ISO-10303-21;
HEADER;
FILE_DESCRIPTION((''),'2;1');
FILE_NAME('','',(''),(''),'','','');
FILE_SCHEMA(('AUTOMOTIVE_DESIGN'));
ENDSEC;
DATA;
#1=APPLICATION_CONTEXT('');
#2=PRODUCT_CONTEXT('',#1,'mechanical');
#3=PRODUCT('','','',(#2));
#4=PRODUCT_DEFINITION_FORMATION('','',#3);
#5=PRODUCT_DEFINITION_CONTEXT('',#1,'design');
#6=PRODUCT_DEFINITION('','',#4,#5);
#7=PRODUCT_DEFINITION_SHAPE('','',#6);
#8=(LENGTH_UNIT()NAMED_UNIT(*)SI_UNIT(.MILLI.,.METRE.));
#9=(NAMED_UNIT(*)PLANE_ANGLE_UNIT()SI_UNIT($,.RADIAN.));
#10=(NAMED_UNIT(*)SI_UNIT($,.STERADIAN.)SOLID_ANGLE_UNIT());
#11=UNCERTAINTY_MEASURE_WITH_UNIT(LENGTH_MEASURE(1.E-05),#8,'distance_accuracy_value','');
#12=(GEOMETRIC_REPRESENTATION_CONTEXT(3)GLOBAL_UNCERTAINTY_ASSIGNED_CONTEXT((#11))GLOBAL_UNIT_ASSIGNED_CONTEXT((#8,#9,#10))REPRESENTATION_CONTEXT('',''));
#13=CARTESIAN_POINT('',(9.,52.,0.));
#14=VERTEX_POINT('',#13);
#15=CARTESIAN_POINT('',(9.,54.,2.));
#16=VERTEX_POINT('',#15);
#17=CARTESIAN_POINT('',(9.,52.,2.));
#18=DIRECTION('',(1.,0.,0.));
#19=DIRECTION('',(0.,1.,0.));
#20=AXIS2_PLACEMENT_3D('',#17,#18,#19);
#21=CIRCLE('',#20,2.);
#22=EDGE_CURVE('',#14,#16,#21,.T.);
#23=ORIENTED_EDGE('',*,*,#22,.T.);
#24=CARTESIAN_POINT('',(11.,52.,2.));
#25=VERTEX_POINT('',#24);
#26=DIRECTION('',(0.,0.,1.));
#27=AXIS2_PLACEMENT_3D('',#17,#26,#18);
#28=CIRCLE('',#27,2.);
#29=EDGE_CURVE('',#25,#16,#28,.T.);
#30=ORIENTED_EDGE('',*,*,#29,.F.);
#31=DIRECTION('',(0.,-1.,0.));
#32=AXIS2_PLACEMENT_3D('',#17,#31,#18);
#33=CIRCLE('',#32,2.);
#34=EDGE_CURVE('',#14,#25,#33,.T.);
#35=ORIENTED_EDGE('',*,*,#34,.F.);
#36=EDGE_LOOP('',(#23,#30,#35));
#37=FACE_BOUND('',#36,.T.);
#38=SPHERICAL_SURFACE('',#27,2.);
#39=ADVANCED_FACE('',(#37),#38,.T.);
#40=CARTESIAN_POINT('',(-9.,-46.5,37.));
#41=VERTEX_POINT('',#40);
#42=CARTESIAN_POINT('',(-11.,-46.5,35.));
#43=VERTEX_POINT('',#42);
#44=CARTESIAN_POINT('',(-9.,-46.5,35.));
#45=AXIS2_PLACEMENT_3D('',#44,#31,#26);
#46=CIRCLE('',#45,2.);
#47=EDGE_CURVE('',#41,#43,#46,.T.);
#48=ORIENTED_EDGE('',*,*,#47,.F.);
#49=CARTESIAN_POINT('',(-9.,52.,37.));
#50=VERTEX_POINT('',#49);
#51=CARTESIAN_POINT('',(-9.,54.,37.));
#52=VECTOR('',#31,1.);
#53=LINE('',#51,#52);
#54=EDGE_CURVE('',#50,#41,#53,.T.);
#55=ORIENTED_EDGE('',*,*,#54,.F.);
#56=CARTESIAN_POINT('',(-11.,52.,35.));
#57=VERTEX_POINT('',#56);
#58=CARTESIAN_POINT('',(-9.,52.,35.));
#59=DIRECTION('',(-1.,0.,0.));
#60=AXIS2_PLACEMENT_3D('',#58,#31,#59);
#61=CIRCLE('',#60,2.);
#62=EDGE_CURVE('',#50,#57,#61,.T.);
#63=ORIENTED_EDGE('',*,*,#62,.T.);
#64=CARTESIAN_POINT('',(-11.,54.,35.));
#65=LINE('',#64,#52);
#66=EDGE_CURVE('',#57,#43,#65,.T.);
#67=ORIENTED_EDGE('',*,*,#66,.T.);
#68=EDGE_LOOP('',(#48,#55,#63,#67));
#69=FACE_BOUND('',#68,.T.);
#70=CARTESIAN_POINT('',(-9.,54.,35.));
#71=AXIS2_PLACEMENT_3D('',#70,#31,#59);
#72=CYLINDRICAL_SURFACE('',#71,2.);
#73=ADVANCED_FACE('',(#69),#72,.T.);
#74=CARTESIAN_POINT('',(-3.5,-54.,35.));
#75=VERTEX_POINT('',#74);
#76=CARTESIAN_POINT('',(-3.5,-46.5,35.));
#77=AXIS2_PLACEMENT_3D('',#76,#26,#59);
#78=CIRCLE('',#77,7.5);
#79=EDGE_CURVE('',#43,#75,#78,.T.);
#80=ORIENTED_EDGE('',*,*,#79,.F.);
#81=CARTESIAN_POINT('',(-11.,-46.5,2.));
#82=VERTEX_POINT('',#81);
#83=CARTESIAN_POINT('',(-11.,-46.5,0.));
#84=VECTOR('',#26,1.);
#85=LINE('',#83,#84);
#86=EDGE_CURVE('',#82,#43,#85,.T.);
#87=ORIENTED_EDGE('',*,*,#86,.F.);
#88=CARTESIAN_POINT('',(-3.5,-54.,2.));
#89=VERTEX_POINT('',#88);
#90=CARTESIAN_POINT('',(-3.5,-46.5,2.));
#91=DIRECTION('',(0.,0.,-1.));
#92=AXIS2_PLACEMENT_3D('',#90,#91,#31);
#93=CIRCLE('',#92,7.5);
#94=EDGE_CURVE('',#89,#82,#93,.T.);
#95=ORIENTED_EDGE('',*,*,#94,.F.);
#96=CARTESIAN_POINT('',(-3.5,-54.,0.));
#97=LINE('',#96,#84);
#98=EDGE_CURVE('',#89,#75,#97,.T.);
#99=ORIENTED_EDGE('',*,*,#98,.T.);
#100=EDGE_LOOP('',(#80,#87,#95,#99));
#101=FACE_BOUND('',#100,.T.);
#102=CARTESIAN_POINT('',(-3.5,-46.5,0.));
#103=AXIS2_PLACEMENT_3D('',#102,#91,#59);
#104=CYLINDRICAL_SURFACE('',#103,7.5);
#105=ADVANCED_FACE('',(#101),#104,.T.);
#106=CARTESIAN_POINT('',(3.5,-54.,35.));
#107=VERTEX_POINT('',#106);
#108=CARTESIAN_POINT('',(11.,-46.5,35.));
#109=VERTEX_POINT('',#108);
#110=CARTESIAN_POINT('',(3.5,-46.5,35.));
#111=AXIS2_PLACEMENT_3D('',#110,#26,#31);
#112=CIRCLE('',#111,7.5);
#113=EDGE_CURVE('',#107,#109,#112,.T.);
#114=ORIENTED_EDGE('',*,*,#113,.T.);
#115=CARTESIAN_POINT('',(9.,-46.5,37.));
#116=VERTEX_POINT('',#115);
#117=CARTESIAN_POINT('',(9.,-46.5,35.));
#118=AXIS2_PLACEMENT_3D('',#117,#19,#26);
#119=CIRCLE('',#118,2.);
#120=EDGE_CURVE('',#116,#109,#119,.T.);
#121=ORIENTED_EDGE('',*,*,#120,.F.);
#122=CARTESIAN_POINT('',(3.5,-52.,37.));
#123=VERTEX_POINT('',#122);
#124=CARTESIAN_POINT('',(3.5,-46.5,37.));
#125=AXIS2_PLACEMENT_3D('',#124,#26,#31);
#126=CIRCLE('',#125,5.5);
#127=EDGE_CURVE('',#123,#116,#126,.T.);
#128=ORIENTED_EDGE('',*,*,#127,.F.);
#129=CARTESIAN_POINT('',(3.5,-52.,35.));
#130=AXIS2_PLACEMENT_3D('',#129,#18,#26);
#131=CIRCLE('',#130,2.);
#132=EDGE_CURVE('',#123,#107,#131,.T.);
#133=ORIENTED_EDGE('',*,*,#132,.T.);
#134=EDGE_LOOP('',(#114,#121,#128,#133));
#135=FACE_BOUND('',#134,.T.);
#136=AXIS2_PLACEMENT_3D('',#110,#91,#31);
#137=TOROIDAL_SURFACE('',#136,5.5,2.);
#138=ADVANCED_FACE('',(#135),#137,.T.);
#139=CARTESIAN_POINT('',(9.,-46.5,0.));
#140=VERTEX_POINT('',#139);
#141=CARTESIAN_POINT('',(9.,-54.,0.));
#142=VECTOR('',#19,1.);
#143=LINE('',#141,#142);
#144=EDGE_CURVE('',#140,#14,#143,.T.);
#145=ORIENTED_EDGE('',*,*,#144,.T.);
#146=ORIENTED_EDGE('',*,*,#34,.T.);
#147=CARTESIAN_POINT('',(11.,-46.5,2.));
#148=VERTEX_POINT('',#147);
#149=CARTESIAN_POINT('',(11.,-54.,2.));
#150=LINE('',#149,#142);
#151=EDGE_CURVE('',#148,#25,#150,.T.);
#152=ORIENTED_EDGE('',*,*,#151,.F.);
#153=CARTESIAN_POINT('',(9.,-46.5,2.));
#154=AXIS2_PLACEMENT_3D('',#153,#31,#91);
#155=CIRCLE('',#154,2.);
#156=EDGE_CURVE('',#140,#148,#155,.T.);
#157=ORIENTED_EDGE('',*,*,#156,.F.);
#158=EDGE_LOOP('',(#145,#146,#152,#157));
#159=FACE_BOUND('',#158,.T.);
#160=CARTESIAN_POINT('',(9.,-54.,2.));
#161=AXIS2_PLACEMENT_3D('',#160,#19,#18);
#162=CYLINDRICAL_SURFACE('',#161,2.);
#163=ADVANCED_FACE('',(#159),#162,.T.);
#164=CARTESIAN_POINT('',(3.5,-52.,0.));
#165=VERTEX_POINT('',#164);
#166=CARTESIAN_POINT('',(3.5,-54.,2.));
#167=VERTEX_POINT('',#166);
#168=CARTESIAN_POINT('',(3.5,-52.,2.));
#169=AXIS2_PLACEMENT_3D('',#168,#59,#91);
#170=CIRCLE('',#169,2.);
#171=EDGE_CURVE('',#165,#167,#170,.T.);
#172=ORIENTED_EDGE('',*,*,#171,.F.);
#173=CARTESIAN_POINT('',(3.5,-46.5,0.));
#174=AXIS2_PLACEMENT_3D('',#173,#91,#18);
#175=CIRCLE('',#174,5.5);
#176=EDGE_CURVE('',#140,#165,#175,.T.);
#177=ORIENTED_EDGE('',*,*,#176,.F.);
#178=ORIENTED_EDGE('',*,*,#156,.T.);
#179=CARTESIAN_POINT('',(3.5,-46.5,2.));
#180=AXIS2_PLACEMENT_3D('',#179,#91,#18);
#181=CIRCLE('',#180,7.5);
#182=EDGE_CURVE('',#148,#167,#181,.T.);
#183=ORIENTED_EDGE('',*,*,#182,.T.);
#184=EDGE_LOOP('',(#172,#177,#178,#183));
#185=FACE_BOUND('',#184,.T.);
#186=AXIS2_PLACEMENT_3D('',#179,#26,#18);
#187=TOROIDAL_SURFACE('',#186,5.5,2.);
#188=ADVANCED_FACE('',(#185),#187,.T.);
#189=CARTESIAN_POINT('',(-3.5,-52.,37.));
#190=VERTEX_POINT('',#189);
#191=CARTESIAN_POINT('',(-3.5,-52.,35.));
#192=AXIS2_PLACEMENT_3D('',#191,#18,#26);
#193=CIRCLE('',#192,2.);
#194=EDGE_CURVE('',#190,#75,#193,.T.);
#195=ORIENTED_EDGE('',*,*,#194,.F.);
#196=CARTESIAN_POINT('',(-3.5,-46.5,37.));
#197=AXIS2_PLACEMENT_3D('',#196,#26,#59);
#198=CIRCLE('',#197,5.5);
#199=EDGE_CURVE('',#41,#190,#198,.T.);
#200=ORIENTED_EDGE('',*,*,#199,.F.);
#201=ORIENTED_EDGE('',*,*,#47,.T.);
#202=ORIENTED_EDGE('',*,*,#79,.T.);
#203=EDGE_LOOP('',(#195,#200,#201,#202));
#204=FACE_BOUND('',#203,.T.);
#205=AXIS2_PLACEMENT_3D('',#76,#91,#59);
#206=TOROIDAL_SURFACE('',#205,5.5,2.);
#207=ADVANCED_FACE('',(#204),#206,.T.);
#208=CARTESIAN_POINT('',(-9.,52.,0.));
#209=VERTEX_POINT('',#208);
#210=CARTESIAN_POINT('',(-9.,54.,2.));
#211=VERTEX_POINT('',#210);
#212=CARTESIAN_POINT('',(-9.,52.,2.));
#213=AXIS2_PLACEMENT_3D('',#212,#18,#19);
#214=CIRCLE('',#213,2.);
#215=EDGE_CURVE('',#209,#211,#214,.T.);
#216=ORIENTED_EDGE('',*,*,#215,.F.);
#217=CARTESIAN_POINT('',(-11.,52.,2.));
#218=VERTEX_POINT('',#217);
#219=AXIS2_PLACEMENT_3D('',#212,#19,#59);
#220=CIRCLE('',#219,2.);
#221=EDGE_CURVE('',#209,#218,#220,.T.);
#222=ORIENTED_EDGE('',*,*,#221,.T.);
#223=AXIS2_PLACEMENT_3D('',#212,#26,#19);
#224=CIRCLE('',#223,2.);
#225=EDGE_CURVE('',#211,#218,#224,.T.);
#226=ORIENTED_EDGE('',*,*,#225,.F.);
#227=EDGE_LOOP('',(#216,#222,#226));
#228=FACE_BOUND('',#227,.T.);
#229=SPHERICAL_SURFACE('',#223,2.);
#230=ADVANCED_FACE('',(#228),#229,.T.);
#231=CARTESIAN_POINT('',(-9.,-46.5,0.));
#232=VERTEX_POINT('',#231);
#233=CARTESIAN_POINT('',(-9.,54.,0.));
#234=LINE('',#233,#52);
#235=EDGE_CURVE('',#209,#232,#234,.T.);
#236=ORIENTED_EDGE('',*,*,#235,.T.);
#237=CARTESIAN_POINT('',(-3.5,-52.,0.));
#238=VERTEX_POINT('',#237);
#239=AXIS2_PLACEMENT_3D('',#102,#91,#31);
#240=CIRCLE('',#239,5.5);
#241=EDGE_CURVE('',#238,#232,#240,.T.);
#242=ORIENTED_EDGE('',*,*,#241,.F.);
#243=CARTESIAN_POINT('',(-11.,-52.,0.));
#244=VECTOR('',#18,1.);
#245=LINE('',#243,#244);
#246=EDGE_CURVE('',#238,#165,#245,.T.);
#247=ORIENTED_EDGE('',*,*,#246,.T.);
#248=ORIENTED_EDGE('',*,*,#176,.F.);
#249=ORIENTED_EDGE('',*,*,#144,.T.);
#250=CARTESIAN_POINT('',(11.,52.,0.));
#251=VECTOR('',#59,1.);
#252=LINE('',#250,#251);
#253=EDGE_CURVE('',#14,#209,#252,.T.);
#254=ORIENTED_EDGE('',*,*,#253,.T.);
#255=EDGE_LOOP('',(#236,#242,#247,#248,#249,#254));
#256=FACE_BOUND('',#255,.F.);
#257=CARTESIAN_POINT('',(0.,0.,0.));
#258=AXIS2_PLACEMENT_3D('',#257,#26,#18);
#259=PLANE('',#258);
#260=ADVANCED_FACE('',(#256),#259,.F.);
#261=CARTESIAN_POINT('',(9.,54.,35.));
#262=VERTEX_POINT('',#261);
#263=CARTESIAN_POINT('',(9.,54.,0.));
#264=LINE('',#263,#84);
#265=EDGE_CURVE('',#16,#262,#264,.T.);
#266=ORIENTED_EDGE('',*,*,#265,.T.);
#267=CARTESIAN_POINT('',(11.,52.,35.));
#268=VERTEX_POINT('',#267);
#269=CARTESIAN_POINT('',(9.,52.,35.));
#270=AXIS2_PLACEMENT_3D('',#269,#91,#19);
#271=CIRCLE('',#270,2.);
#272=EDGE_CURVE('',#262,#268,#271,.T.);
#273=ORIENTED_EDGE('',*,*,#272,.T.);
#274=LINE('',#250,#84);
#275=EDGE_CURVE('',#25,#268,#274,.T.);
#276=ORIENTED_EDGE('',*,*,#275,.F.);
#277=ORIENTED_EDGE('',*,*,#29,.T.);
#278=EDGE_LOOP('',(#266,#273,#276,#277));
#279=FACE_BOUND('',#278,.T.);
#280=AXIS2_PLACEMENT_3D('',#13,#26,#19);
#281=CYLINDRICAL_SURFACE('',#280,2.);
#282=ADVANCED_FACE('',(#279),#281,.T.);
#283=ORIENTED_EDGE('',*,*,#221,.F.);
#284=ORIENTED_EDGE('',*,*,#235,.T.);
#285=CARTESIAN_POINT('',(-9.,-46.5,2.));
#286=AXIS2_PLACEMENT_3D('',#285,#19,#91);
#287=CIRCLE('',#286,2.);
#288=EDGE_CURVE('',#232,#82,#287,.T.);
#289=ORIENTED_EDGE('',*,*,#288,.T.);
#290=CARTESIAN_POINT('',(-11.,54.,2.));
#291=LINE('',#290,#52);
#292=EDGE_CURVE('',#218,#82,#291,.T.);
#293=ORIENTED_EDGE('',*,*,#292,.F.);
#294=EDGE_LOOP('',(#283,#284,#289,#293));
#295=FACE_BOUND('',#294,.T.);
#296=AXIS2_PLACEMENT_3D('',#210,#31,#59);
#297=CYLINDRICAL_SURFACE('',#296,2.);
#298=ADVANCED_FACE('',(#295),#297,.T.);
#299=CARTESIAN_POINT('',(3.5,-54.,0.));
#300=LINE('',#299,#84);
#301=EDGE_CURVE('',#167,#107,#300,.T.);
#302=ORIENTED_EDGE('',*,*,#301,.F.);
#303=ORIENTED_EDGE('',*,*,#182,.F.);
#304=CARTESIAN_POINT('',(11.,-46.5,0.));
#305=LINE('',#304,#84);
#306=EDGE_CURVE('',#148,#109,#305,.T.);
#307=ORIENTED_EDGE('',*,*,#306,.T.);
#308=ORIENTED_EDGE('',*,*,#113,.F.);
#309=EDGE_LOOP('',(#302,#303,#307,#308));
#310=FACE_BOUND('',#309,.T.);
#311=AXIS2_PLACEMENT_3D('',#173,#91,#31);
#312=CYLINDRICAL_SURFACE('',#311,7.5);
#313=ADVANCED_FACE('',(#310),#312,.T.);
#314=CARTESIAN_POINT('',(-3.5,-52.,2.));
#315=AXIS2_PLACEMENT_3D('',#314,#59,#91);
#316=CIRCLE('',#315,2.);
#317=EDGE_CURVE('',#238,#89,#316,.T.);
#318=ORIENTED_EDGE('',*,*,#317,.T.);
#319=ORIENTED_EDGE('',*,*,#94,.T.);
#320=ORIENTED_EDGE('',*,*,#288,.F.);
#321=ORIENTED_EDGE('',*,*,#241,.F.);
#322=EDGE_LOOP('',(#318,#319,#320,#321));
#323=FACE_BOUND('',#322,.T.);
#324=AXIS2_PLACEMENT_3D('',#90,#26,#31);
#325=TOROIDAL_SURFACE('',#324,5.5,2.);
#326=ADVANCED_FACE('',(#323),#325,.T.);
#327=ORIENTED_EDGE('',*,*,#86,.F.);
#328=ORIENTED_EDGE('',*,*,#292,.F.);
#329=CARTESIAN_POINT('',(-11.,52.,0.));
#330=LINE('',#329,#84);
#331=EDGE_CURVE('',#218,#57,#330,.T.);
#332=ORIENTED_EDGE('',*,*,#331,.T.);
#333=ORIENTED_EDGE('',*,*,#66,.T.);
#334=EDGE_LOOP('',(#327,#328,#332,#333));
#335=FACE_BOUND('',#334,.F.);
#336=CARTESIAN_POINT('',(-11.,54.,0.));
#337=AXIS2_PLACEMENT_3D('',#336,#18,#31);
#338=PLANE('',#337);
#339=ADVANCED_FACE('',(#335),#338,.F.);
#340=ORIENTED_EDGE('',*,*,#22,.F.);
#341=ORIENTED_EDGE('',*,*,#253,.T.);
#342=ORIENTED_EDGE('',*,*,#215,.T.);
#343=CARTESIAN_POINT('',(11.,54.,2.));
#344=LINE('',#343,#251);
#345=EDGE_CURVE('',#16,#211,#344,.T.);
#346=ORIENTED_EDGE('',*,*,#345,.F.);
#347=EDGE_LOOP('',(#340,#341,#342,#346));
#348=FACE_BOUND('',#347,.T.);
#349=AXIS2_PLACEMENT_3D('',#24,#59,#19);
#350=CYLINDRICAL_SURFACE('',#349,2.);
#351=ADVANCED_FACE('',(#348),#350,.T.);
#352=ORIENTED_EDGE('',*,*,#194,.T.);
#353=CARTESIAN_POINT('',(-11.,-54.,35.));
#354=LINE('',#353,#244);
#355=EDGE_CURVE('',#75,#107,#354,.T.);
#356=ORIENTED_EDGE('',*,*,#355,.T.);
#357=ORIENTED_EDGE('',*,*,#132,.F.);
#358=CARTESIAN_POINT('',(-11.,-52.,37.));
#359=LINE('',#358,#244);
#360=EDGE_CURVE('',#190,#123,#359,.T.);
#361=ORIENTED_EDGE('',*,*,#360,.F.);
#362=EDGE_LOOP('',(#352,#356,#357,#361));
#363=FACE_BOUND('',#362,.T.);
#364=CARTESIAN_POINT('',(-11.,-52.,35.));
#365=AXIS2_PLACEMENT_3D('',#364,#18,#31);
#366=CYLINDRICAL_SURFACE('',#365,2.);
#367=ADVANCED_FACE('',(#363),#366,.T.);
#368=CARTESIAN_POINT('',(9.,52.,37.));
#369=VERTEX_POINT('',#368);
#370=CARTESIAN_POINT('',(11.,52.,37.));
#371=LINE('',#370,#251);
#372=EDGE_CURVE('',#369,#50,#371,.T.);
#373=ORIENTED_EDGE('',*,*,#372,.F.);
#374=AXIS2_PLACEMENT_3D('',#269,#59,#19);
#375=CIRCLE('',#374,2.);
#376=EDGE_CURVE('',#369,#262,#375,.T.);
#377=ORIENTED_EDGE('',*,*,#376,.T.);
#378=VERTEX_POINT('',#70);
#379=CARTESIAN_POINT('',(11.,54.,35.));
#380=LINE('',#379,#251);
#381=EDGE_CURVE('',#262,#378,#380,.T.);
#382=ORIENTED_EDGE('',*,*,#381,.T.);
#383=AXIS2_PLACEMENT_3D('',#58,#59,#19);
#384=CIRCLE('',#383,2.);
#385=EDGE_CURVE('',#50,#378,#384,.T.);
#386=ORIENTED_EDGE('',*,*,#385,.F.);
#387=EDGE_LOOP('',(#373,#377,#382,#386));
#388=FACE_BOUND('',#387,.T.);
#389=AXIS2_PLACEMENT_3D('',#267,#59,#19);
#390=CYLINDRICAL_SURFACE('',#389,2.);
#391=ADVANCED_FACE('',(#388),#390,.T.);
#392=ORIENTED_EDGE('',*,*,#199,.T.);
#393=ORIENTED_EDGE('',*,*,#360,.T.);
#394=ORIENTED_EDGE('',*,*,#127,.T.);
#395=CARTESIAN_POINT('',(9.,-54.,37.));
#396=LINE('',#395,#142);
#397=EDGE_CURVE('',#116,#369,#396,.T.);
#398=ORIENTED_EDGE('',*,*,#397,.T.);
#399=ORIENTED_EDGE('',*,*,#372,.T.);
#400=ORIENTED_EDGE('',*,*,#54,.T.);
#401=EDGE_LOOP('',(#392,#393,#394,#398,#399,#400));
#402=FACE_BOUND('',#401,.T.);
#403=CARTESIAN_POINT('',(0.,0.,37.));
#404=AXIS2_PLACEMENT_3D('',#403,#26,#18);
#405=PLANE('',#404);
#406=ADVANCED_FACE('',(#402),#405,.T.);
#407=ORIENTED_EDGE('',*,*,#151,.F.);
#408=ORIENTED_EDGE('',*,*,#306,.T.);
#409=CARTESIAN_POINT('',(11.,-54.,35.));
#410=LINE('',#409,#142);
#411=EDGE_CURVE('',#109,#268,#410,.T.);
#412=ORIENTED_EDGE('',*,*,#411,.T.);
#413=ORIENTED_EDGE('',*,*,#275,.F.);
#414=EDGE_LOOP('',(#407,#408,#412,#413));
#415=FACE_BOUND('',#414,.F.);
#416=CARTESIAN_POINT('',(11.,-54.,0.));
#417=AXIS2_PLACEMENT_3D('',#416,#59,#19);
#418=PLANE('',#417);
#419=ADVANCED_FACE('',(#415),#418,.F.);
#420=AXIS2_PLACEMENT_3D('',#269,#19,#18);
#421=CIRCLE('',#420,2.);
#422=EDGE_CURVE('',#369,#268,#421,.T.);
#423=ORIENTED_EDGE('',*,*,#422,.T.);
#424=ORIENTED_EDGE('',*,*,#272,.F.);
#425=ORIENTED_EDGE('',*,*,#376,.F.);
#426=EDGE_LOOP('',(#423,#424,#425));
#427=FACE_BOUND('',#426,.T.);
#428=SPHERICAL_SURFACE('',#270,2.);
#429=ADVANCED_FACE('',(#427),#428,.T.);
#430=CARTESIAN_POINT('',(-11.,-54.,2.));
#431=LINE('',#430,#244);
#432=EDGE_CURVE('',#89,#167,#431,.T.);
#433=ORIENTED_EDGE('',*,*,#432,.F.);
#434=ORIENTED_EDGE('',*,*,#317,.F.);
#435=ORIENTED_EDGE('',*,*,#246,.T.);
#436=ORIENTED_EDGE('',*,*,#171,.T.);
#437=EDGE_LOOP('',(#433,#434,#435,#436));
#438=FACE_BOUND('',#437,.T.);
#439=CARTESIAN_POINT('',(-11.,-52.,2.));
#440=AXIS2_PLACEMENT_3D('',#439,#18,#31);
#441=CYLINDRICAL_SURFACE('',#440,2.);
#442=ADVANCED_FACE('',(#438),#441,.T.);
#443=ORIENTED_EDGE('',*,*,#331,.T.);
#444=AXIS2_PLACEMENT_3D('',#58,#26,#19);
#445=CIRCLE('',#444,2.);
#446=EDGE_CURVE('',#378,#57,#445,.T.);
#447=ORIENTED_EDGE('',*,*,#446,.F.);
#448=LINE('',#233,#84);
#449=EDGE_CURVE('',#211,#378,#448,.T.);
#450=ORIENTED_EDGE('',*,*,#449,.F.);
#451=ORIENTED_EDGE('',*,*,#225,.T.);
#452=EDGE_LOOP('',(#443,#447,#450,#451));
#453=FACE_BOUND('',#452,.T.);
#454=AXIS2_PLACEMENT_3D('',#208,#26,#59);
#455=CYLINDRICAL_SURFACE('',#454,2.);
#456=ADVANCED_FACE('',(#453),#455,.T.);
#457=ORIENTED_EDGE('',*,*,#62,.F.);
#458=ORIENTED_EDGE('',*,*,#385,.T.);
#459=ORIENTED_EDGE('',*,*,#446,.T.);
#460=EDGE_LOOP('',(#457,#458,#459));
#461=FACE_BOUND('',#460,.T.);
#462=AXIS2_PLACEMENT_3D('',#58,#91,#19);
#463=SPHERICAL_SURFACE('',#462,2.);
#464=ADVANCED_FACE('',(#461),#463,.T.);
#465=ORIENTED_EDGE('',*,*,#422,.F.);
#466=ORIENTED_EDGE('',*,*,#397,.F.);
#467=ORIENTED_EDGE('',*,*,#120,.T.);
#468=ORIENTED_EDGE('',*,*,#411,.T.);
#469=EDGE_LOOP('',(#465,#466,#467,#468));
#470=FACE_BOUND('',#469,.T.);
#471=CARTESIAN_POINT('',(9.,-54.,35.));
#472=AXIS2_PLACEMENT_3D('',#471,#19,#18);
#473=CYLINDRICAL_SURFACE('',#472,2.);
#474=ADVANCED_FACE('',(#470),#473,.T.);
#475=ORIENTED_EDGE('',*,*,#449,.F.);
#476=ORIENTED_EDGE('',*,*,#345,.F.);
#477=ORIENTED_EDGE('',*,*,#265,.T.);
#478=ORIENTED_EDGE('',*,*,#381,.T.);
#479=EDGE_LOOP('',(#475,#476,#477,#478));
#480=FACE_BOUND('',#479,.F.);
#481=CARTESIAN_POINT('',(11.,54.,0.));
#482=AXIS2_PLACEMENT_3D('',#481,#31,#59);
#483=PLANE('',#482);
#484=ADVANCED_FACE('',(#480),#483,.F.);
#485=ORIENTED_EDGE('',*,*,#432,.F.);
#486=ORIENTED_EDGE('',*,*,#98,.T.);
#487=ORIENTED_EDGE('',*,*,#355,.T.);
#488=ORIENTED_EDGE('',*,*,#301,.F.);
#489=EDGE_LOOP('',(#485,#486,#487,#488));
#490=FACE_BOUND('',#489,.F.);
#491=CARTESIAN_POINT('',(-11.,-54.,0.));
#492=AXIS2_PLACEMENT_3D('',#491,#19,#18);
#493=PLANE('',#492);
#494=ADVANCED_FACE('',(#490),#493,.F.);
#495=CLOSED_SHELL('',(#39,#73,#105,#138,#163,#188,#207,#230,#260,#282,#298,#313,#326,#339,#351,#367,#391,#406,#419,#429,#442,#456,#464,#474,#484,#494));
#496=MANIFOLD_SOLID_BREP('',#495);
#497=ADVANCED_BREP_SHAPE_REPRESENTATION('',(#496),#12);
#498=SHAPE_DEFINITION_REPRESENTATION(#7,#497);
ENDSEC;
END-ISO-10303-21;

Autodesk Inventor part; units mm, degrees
ref_plane "YZ Plane" through (0, 0, 0) normal (1, 0, 0) x (0, 1, 0)
ref_plane "XZ Plane" through (0, 0, 0) normal (0, 1, 0) x (-1, 0, 0)
ref_plane "XY Plane" through (0, 0, 0) normal (0, 0, 1) x (1, 0, 0)
sketch "Sketch1" plane through (0, 0, 0) normal (0, 0, 1) x (1, 0, 0)
  line L0 (-11, -54) -> (11, -54)
  line L1 (11, -54) -> (11, 54)
  line L2 (11, 54) -> (-11, 54)
  line L3 (-11, 54) -> (-11, -54)
  line L4 (-11, -54) -> (11, 54) construction
  line L5 (11, -54) -> (-11, 54) construction
  point P0 (0, 0)
  dimension "d0" = 22
  dimension "d1" = 108
extrude "Extrusion1" add sketch "Sketch1" along normal blind 37
fillet "Fillet1" radius 2 10 edges at (11, 54, 18.5) (-11, 54, 18.5) (0, 54, 37) (11, 0, 37) (-11, 0, 37) (11, 0, 0) (0, 54, 0) (-11, 0, 0) (0, -54, 37) (0, -54, 0)
fillet "Fillet2" radius 7.5 6 edges at (10.4142, -53.4142, 36.4142) (10.4142, -53.4142, 0.5858) (11, -54, 18.5) (-10.4142, -53.4142, 36.4142) (-10.4142, -53.4142, 0.5858) (-11, -54, 18.5)
properties part number "Lipo-2800-3S-Pack-3" material "Acetal Resin, Black"
